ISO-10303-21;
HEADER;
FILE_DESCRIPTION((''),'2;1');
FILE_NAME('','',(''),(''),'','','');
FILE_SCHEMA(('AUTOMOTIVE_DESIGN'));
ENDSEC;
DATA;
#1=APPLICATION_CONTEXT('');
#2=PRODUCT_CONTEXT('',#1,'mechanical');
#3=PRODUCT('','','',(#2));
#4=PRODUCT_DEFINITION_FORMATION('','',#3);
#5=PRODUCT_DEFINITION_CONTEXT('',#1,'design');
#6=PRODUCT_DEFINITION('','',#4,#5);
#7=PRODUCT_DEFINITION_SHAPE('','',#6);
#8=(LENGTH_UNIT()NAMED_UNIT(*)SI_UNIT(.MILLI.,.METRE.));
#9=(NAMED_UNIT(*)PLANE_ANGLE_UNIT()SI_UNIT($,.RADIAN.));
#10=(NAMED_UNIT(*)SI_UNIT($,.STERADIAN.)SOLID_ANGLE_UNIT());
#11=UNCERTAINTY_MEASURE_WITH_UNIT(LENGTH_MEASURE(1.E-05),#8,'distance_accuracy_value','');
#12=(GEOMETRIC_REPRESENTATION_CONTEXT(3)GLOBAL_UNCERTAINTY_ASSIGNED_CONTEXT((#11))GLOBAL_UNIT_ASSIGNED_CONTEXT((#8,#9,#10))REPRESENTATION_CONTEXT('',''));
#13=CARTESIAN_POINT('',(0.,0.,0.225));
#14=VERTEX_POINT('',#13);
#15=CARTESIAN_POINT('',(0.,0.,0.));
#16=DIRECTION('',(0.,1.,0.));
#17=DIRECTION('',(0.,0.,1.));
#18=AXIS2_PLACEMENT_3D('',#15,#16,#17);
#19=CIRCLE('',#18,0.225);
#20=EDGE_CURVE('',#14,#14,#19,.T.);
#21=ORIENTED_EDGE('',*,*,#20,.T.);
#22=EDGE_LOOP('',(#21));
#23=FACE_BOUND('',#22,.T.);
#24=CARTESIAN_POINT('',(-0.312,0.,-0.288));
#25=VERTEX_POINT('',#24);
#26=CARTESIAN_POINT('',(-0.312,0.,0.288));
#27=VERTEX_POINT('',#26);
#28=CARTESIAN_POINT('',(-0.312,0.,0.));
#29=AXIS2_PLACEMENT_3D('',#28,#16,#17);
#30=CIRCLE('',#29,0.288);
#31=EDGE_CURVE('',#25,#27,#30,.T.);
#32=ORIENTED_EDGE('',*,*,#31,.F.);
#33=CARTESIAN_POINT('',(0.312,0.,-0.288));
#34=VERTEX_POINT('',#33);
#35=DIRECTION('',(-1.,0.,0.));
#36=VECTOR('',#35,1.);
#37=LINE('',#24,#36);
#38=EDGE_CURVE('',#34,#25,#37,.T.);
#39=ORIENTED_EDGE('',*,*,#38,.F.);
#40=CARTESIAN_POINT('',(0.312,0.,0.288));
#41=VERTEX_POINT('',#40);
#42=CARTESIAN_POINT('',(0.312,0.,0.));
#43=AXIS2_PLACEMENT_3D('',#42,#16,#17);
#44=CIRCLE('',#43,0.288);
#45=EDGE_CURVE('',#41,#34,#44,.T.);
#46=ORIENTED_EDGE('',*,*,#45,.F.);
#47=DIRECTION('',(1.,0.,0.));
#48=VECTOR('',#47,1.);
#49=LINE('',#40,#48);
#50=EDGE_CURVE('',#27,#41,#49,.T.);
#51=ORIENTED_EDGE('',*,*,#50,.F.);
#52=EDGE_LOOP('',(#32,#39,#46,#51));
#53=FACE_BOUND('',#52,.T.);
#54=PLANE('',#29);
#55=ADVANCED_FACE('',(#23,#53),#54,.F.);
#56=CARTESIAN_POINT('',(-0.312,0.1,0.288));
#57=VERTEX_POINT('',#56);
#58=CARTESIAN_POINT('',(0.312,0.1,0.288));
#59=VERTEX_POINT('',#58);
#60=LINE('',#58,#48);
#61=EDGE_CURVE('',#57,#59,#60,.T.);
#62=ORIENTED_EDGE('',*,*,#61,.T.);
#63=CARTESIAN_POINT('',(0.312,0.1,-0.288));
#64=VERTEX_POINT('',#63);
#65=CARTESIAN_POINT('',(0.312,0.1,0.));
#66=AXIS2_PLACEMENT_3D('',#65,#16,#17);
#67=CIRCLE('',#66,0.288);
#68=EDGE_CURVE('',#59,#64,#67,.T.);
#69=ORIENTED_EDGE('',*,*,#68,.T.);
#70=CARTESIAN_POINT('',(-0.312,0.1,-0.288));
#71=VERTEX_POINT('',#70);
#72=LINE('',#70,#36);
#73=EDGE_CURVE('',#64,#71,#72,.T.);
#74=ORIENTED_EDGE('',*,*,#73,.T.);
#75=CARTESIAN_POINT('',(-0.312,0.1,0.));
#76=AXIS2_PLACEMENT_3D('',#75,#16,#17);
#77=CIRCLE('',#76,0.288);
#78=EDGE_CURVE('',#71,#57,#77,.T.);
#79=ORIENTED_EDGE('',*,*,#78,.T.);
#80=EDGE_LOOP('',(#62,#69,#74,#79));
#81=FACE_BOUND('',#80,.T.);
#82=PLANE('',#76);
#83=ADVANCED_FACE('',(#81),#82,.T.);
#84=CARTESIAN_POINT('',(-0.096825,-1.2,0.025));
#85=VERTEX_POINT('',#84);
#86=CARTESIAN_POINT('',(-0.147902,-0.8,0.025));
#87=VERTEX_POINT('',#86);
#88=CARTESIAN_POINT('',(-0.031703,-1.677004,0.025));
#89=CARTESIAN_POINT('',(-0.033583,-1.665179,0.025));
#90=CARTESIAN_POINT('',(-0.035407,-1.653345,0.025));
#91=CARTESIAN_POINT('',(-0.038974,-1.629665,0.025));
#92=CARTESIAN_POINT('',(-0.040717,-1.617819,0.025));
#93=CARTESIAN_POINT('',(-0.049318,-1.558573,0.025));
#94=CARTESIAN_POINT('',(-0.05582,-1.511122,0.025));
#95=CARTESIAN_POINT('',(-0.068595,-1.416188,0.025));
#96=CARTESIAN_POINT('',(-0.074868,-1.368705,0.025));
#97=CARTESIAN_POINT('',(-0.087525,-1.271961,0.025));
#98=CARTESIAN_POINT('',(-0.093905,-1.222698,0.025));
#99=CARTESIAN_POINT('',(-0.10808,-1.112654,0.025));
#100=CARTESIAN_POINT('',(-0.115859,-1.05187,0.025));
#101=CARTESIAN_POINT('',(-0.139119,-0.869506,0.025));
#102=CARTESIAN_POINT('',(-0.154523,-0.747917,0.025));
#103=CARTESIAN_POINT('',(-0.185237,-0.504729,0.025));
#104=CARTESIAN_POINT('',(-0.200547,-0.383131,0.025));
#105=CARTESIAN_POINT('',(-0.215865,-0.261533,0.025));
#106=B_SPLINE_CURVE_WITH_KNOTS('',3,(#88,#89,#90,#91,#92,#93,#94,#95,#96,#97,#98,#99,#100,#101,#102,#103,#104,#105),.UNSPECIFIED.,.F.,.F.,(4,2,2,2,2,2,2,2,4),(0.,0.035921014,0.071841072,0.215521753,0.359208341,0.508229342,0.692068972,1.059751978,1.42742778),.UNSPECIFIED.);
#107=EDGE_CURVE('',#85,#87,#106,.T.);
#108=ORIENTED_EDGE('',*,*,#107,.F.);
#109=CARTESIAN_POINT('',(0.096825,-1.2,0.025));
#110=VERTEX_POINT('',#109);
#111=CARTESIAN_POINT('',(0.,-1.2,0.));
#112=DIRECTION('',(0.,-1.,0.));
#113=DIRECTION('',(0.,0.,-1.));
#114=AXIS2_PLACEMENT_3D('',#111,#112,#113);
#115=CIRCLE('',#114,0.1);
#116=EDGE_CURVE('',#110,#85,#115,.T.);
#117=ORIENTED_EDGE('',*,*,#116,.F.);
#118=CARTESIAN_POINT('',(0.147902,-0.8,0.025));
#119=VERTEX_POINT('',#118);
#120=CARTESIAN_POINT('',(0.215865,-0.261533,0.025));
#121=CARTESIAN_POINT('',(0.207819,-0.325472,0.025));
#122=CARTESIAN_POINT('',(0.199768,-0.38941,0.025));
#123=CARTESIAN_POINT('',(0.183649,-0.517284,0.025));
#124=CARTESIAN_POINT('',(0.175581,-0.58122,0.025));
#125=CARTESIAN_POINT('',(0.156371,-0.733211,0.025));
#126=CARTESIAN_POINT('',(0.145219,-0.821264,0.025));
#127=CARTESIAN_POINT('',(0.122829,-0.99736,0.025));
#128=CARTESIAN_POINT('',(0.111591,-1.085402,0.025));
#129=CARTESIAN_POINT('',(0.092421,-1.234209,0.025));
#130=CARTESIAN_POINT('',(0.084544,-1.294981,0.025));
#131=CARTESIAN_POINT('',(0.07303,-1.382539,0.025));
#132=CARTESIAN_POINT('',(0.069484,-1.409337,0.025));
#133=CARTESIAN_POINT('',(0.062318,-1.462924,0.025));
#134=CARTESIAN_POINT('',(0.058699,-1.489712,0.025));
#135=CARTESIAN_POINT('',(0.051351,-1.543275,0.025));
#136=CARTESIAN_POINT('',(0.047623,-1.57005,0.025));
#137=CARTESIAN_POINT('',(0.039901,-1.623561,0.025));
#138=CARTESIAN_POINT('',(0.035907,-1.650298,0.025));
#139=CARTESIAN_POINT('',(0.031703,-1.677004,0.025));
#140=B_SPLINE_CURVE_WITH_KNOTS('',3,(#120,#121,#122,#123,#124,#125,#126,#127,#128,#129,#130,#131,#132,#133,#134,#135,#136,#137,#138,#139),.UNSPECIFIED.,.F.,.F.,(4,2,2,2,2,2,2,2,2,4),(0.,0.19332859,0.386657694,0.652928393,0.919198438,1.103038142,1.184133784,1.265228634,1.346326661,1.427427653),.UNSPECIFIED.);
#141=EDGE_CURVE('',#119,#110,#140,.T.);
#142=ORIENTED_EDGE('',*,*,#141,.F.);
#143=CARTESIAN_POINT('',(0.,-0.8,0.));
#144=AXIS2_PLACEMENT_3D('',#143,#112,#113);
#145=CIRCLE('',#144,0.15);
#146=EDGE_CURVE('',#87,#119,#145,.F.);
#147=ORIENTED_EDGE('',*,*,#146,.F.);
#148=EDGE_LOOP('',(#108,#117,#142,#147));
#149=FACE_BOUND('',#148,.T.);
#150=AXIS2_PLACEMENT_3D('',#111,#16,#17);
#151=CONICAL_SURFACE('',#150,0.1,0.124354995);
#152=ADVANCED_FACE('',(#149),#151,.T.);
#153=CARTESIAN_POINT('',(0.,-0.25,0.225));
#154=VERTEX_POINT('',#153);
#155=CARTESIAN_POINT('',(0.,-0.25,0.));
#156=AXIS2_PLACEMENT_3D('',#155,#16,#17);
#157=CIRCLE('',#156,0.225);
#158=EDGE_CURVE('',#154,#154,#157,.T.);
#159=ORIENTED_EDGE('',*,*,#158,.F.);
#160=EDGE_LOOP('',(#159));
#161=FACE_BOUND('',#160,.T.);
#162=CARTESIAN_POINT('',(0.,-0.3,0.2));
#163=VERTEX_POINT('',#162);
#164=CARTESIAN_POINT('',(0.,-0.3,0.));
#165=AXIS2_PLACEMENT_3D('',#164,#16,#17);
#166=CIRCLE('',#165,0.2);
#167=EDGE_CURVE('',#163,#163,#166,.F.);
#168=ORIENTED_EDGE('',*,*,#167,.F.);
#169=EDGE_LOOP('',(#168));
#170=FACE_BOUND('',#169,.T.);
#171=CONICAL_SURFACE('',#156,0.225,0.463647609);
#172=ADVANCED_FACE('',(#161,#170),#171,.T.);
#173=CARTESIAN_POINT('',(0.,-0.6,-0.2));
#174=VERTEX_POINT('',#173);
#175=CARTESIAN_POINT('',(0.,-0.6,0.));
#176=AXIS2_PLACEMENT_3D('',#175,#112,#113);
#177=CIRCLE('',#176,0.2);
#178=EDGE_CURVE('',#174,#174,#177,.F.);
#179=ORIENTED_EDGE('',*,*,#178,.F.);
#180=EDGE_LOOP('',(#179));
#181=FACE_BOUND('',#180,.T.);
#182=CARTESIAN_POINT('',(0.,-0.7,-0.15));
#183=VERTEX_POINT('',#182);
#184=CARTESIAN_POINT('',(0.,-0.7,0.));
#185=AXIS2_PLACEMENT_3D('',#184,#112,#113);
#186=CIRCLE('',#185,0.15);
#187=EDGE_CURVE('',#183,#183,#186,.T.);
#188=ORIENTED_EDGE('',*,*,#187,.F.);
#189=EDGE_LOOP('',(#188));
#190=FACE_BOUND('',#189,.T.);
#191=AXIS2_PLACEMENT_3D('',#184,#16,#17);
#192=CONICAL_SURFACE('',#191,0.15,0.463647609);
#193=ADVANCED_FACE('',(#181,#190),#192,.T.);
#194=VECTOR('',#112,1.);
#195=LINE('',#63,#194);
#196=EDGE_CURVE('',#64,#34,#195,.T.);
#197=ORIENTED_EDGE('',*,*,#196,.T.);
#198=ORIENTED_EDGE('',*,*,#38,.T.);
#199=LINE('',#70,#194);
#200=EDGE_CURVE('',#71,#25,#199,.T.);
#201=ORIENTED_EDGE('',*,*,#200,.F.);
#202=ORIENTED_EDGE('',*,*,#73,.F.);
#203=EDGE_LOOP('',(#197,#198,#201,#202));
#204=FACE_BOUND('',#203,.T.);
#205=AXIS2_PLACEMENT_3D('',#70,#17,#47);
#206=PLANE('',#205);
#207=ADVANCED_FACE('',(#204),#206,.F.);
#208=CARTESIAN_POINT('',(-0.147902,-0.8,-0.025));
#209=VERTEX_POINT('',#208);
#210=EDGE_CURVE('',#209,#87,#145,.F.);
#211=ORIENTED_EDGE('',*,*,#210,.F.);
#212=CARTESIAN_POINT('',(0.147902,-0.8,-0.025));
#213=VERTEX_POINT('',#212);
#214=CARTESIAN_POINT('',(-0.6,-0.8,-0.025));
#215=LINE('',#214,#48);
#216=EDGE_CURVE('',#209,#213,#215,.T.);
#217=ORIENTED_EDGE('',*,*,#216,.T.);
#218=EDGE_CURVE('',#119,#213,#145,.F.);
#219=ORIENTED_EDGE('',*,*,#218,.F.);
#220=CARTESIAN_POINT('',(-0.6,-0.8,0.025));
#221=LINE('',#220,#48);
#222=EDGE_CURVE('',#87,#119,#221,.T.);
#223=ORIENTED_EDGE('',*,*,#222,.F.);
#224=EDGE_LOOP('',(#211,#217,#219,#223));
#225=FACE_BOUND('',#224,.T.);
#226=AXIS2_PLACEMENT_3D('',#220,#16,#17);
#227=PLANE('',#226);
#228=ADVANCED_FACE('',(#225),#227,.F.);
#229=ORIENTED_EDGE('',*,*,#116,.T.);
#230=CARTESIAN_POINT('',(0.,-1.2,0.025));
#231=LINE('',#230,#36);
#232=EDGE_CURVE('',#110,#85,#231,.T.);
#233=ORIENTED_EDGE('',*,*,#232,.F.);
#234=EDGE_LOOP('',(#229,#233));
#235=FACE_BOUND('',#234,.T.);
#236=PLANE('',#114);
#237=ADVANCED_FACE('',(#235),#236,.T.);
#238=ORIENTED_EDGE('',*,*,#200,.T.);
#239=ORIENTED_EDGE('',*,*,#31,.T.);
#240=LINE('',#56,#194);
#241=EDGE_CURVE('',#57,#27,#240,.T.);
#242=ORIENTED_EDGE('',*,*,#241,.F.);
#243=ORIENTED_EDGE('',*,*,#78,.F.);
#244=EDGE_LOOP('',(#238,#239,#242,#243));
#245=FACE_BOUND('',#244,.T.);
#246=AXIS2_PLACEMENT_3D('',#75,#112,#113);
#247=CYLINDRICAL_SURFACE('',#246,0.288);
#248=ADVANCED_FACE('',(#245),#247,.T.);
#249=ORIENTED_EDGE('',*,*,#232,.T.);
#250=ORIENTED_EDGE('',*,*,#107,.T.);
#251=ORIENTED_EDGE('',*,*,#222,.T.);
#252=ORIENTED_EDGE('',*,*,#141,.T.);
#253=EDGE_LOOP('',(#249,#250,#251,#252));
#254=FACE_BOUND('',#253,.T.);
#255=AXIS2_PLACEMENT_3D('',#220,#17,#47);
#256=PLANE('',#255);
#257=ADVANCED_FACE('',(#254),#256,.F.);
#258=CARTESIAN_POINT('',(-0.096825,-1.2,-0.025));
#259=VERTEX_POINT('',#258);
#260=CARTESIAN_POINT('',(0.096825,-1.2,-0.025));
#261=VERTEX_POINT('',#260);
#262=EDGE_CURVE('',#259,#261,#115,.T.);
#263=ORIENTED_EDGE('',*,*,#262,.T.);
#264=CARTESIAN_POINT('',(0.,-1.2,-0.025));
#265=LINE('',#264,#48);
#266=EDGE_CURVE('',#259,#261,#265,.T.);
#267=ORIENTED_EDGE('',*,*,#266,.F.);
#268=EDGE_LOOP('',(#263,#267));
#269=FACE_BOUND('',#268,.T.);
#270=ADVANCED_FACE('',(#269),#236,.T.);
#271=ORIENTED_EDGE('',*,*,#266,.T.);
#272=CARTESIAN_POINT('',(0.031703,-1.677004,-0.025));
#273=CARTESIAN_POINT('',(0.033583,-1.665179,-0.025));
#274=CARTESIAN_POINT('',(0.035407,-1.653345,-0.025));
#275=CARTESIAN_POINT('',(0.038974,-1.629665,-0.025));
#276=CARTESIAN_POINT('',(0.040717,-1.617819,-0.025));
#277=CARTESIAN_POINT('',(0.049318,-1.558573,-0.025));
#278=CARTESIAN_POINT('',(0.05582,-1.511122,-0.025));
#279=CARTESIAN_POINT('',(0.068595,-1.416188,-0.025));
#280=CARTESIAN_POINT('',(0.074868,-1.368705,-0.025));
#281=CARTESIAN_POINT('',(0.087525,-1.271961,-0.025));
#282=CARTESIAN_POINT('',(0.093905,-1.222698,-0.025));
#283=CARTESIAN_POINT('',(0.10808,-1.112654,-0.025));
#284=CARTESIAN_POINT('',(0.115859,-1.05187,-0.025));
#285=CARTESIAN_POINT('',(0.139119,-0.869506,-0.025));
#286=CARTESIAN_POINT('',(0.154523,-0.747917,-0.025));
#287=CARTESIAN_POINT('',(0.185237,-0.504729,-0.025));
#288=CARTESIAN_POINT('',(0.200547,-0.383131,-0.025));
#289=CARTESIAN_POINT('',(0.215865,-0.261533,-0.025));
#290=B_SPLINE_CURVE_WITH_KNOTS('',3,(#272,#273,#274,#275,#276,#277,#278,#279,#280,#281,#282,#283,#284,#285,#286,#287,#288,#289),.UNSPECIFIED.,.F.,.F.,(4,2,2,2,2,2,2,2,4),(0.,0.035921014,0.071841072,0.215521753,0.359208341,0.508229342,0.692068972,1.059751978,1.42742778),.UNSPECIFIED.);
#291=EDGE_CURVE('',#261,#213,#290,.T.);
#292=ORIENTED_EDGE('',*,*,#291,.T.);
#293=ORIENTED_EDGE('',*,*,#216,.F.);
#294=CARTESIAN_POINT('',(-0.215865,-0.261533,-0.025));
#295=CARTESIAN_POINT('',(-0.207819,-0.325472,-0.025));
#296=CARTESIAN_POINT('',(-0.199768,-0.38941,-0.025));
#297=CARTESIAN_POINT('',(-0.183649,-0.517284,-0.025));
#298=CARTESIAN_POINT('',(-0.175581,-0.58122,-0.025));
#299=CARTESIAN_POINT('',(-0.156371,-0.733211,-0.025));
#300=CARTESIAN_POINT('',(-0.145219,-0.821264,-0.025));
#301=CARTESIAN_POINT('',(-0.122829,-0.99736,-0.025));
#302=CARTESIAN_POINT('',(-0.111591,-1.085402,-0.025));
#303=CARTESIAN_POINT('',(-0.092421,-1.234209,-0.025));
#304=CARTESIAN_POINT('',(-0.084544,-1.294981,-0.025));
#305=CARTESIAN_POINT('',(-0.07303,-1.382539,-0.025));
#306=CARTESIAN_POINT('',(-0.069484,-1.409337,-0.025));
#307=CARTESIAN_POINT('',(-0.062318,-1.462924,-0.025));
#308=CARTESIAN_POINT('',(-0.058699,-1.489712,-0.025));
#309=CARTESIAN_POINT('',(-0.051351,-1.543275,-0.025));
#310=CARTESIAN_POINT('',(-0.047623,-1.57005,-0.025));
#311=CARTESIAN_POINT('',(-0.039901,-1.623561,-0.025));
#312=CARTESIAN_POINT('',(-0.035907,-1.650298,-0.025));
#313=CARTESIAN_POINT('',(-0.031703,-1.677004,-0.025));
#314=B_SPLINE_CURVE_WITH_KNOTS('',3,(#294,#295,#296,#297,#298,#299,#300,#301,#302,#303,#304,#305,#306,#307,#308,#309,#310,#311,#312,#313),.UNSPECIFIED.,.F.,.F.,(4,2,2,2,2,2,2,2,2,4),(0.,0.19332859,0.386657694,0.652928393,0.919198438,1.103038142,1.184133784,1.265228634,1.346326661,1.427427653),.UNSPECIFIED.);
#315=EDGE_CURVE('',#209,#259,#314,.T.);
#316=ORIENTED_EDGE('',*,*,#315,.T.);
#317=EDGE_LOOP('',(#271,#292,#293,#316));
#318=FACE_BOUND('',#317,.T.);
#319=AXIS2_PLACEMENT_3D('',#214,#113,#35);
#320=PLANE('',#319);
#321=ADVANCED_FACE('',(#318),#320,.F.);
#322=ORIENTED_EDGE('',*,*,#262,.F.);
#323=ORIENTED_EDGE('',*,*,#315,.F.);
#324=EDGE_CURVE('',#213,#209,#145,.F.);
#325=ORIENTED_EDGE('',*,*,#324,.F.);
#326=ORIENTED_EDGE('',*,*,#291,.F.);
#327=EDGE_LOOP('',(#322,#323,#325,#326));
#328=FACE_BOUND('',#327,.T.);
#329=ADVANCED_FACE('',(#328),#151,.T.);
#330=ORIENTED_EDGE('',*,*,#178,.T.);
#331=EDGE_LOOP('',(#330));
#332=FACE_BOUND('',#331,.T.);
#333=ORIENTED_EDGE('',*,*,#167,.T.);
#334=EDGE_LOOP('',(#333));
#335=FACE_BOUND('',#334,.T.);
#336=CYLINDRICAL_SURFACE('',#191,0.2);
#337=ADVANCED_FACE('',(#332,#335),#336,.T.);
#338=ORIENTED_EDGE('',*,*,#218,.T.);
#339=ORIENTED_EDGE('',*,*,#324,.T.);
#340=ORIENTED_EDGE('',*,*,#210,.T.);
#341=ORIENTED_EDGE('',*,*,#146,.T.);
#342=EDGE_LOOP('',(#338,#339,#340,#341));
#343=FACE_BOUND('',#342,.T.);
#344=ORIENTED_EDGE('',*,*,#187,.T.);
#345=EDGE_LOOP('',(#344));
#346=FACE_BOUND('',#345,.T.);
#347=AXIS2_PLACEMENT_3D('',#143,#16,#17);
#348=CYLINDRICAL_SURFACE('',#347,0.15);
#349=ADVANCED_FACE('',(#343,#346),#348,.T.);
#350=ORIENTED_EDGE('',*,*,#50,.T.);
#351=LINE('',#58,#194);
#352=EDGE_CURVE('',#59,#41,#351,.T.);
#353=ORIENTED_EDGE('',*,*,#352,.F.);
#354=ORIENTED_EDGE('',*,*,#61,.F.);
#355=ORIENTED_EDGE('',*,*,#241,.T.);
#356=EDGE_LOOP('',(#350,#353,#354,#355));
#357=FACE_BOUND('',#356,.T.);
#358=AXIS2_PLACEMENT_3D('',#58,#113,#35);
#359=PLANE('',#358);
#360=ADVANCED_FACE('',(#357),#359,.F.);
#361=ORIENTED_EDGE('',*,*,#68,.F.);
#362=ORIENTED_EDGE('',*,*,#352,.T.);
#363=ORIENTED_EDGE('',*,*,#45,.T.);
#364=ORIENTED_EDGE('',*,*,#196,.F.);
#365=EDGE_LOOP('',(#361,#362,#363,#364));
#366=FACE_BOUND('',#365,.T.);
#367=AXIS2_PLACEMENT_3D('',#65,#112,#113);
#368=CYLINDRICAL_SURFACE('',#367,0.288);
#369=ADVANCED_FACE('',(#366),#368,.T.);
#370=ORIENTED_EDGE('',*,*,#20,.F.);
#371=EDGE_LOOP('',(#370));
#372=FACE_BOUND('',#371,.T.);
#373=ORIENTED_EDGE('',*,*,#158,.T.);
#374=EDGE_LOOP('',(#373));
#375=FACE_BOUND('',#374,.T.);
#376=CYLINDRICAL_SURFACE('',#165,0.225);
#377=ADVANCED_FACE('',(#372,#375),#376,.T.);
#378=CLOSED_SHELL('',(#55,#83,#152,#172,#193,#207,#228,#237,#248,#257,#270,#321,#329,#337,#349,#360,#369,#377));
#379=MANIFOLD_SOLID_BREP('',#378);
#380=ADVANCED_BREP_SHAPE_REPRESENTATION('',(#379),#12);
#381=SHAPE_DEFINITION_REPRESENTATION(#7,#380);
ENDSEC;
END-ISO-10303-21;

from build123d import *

# Parameters (mm, degrees)
BOSS_EXTRUDE1_DEPTH     = 0.1
SKETCH2_R               = 0.225
BOSS_EXTRUDE2_DEPTH     = 0.3
SKETCH3_R               = 0.2
BOSS_EXTRUDE3_DEPTH     = 0.4
SKETCH4_R               = 0.15
BOSS_EXTRUDE4_DEPTH     = 0.1
SKETCH5_R               = 0.15
BOSS_EXTRUDE5_DEPTH     = 0.4
CHAMFER1_SIZE           = 0.05
CHAMFER1_SIZE_2         = 0.025
CHAMFER2_SIZE           = 0.1
CHAMFER2_SIZE_2         = 0.05
CHAMFER3_SIZE           = 0.4
CHAMFER3_SIZE2          = 0.05
CUT_EXTRUDE1_DEPTH      = 2.372204066
CUT_EXTRUDE1_DEPTH_BACK = 2.372204066
SKETCH6_W               = 0.05
SKETCH6_H               = 0.517449495


with BuildPart() as part:
    # Sketch1 → Boss-Extrude1 (new body)
    with BuildSketch(Plane(origin=(0, 0, 0), x_dir=(1, 0, 0), z_dir=(0, 1, 0))):
        with BuildLine():
            Line((-0.312, 0.288), (0.312, 0.288))
            ThreePointArc((0.312, 0.288), (0.6, 0), (0.312, -0.288))
            Line((0.312, -0.288), (-0.312, -0.288))
            ThreePointArc((-0.312, -0.288), (-0.6, 0), (-0.312, 0.288))
        make_face()
    extrude(amount=BOSS_EXTRUDE1_DEPTH)

    # Sketch2 → Boss-Extrude2 (add)
    with BuildSketch(Plane(origin=(0, 0, 0), x_dir=(1, 0, 0), z_dir=(0, 1, 0))):
        with Locations(Location((0, 0, 0), (0, 0, 270))):
            Circle(SKETCH2_R)
    extrude(amount=-BOSS_EXTRUDE2_DEPTH)

    # Sketch3 → Boss-Extrude3 (add)
    with BuildSketch(Plane.XZ.offset(0.3)):
        with Locations(Location((0, 0, 0), (0, 0, 90))):
            Circle(SKETCH3_R)
    extrude(amount=BOSS_EXTRUDE3_DEPTH)

    # Sketch4 → Boss-Extrude4 (add)
    with BuildSketch(Plane.XZ.offset(0.7)):
        with Locations(Location((0, 0, 0), (0, 0, 270))):
            Circle(SKETCH4_R)
    extrude(amount=BOSS_EXTRUDE4_DEPTH)

    # Sketch5 → Boss-Extrude5 (add)
    with BuildSketch(Plane.XZ.offset(0.8)):
        with Locations(Location((0, 0, 0), (0, 0, 270))):
            Circle(SKETCH5_R)
    extrude(amount=BOSS_EXTRUDE5_DEPTH)

    # Chamfer1
    # the kernel refuses this chamfer: 0.05, 0.025 mm, written as the material it takes off along each edge
    with BuildSketch(Plane(origin=(0, -0.3, 0), x_dir=(0, 0, 1), z_dir=(-1, 0, 0))) as chamfer1_piece_1_section:
        Polygon((0.225, CHAMFER1_SIZE), (0.225 - CHAMFER1_SIZE_2, 0), (0.225, 0), align=None)
    chamfer1_piece_1 = revolve(axis=Axis((0, -0.3, 0), (0, 1, 0)), mode=Mode.PRIVATE)
    chamfer1_piece_1 = chamfer1_piece_1 - Plane(origin=(0, -0.274549164, 0), x_dir=(0, 0, 1), z_dir=(0, 1, 0)) * Cylinder(0.2, 1, mode=Mode.PRIVATE)
    add(chamfer1_piece_1, mode=Mode.SUBTRACT)

    # Chamfer2
    # the kernel refuses this chamfer: 0.1, 0.05 mm, written as the material it takes off along each edge
    with BuildSketch(Plane(origin=(0, -0.7, 0), x_dir=(0, 0, 1), z_dir=(1, 0, 0))) as chamfer2_piece_1_section:
        Polygon((0.2, -CHAMFER2_SIZE), (0.2 - CHAMFER2_SIZE_2, 0), (0.2, 0), align=None)
    chamfer2_piece_1 = revolve(axis=Axis((0, -0.7, 0), (0, -1, 0)), mode=Mode.PRIVATE)
    chamfer2_piece_1 = chamfer2_piece_1 - Plane(origin=(0, -0.64887778, 0), x_dir=(0, 0, -1), z_dir=(0, 1, 0)) * Cylinder(0.15, 1, mode=Mode.PRIVATE)
    add(chamfer2_piece_1, mode=Mode.SUBTRACT)

    # Chamfer3
    chamfer3_edges = [part.edges().sort_by_distance(p)[0] for p in [
        (0, -1.2, 0.15),
    ]]
    chamfer3_side = [part.faces().sort_by_distance(p)[0] for p in [
        (0, -0.95, 0.15),
    ]]
    chamfer(chamfer3_edges, length=CHAMFER3_SIZE, length2=CHAMFER3_SIZE2, reference=chamfer3_side[0])

    # Sketch6 → Cut-Extrude1 (cut, two sides: drawn at the far end of the back side and taken through both)
    with BuildSketch(Plane(origin=(0, 0, 0), x_dir=(0, 0, -1), z_dir=(1, 0, 0)).offset(-CUT_EXTRUDE1_DEPTH_BACK)):
        with Locations((0, -1.058724748)):
            Rectangle(SKETCH6_W, SKETCH6_H)
    extrude(amount=CUT_EXTRUDE1_DEPTH + CUT_EXTRUDE1_DEPTH_BACK, mode=Mode.SUBTRACT)


solid = part.part
